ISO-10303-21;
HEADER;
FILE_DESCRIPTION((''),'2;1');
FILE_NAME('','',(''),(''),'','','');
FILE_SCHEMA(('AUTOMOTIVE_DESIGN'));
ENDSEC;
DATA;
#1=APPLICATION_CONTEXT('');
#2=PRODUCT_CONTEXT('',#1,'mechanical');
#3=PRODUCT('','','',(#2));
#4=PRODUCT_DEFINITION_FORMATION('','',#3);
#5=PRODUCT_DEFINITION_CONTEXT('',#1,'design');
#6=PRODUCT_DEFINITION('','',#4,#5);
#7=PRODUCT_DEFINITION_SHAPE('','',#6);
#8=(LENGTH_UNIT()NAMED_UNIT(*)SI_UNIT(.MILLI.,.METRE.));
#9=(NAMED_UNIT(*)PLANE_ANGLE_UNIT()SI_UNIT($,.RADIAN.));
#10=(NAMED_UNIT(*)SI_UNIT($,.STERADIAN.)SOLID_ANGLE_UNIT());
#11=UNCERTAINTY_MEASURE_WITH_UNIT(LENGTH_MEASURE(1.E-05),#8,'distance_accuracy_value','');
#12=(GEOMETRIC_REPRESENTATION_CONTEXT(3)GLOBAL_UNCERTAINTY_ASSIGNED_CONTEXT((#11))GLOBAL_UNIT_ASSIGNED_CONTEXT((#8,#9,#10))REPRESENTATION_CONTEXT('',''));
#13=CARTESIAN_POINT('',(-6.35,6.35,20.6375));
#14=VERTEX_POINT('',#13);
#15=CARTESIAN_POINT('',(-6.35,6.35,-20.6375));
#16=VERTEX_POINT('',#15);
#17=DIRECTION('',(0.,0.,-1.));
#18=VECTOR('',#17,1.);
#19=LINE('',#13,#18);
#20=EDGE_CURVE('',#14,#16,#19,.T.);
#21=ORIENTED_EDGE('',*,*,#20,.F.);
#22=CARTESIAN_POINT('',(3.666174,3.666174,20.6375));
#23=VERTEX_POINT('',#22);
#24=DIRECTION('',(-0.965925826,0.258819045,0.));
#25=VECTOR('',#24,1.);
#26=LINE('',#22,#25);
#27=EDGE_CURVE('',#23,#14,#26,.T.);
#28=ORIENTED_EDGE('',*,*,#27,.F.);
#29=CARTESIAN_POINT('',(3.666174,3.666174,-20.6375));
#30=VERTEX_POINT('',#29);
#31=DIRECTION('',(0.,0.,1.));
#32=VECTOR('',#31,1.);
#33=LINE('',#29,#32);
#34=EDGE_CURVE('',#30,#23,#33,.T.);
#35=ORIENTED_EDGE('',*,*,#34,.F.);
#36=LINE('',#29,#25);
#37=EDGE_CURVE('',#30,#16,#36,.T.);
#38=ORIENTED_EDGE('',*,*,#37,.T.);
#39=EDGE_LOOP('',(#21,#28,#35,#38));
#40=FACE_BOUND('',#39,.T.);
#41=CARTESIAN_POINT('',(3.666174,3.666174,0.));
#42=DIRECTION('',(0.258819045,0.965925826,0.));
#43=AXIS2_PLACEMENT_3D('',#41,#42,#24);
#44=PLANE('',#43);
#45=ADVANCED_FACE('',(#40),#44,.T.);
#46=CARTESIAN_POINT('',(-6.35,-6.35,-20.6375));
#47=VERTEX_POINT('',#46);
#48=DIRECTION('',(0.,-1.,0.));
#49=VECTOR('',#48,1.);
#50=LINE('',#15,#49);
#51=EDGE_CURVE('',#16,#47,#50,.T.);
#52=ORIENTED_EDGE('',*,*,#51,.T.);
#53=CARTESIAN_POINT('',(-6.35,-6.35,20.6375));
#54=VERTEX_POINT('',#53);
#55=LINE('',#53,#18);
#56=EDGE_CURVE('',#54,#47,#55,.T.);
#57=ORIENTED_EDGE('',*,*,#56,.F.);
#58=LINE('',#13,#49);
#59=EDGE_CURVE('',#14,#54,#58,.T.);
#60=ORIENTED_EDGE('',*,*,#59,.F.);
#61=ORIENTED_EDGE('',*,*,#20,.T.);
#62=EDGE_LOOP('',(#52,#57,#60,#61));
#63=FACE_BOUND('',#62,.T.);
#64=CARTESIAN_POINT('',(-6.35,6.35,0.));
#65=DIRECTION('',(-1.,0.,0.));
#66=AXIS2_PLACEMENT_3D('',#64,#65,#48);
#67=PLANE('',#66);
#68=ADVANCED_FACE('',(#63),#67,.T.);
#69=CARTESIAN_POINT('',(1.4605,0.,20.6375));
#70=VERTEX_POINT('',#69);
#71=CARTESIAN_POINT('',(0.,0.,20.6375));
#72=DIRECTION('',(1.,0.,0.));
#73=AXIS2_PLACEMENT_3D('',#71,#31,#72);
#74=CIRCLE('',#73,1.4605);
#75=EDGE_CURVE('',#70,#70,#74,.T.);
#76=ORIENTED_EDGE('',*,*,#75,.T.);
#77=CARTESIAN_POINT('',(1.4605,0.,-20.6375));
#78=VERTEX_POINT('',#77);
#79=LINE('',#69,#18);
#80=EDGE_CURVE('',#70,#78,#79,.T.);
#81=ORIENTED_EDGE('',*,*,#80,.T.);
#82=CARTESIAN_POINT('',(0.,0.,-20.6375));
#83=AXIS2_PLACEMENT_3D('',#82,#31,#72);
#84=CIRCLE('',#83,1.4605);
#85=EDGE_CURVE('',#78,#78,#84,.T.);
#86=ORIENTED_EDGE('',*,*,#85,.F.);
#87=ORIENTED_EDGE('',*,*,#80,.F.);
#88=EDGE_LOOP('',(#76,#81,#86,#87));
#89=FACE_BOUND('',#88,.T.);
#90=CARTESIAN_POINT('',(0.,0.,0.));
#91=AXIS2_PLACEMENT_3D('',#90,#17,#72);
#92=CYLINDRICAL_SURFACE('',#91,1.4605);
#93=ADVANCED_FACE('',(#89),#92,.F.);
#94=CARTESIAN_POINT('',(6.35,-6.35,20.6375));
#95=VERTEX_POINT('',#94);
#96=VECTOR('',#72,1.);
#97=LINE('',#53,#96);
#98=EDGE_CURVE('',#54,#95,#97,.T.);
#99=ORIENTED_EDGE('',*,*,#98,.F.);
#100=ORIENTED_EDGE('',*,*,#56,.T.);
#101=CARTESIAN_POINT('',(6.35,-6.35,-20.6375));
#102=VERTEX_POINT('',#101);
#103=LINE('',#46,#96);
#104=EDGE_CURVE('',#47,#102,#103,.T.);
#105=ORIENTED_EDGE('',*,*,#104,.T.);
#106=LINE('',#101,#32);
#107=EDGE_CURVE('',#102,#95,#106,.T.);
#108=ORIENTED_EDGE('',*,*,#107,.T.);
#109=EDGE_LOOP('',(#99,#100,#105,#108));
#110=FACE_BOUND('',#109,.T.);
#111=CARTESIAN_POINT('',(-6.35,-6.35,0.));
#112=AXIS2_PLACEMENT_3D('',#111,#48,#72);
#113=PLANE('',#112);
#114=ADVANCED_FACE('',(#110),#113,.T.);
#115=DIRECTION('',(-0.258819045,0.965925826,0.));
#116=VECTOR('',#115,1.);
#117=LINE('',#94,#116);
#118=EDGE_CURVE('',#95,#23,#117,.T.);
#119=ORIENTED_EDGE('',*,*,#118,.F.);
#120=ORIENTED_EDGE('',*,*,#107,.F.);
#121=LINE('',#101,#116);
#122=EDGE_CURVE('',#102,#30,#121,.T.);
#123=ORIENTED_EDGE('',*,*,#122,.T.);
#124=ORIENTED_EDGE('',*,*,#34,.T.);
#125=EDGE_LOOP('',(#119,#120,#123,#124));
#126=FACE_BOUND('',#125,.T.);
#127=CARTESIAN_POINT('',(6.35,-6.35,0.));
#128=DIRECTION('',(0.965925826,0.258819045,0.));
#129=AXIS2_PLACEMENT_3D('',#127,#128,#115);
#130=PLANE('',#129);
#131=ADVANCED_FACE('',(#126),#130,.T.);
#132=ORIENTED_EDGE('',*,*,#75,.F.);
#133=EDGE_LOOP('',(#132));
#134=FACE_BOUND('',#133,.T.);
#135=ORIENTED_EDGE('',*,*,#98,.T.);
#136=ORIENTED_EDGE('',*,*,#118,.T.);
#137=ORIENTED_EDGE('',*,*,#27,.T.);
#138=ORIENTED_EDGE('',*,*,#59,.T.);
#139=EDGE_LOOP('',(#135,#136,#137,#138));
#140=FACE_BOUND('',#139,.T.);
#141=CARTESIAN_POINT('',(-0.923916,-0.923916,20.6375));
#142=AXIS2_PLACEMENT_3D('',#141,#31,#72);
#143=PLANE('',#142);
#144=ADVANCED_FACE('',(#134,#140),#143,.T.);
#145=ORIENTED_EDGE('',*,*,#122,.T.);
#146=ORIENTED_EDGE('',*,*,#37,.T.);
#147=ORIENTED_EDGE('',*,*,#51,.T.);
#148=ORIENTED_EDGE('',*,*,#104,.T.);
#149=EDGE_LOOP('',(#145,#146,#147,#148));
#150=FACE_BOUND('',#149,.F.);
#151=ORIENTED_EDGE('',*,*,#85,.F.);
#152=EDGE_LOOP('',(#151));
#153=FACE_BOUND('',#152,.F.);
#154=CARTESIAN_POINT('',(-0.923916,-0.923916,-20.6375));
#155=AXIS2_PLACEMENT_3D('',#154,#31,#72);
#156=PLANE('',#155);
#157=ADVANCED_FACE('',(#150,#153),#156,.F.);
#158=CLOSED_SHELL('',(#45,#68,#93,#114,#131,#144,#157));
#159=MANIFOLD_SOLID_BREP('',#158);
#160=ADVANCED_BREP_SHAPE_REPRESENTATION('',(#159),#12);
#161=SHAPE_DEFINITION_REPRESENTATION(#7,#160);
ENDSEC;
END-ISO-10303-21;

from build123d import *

# Parameters (mm, degrees)
F0_R     = 1.4605
F1_DEPTH = 20.6375


# Not quite as in the source:
# - a length typed as a fraction of an inch, garbled in the dataset ("3 / 203.2 mm" for 3/8 in), is restored


with BuildPart() as f1:
    # F0 (on Top) → F1 (new body, symmetric)
    with BuildSketch(Plane.XY):
        Polygon((-6.35, -6.35), (6.35, -6.35), (3.6661742094, 3.6661742094), (-6.35, 6.35), align=None)
        Circle(F0_R, mode=Mode.SUBTRACT)
    extrude(amount=F1_DEPTH, both=True)


solid = f1.part
